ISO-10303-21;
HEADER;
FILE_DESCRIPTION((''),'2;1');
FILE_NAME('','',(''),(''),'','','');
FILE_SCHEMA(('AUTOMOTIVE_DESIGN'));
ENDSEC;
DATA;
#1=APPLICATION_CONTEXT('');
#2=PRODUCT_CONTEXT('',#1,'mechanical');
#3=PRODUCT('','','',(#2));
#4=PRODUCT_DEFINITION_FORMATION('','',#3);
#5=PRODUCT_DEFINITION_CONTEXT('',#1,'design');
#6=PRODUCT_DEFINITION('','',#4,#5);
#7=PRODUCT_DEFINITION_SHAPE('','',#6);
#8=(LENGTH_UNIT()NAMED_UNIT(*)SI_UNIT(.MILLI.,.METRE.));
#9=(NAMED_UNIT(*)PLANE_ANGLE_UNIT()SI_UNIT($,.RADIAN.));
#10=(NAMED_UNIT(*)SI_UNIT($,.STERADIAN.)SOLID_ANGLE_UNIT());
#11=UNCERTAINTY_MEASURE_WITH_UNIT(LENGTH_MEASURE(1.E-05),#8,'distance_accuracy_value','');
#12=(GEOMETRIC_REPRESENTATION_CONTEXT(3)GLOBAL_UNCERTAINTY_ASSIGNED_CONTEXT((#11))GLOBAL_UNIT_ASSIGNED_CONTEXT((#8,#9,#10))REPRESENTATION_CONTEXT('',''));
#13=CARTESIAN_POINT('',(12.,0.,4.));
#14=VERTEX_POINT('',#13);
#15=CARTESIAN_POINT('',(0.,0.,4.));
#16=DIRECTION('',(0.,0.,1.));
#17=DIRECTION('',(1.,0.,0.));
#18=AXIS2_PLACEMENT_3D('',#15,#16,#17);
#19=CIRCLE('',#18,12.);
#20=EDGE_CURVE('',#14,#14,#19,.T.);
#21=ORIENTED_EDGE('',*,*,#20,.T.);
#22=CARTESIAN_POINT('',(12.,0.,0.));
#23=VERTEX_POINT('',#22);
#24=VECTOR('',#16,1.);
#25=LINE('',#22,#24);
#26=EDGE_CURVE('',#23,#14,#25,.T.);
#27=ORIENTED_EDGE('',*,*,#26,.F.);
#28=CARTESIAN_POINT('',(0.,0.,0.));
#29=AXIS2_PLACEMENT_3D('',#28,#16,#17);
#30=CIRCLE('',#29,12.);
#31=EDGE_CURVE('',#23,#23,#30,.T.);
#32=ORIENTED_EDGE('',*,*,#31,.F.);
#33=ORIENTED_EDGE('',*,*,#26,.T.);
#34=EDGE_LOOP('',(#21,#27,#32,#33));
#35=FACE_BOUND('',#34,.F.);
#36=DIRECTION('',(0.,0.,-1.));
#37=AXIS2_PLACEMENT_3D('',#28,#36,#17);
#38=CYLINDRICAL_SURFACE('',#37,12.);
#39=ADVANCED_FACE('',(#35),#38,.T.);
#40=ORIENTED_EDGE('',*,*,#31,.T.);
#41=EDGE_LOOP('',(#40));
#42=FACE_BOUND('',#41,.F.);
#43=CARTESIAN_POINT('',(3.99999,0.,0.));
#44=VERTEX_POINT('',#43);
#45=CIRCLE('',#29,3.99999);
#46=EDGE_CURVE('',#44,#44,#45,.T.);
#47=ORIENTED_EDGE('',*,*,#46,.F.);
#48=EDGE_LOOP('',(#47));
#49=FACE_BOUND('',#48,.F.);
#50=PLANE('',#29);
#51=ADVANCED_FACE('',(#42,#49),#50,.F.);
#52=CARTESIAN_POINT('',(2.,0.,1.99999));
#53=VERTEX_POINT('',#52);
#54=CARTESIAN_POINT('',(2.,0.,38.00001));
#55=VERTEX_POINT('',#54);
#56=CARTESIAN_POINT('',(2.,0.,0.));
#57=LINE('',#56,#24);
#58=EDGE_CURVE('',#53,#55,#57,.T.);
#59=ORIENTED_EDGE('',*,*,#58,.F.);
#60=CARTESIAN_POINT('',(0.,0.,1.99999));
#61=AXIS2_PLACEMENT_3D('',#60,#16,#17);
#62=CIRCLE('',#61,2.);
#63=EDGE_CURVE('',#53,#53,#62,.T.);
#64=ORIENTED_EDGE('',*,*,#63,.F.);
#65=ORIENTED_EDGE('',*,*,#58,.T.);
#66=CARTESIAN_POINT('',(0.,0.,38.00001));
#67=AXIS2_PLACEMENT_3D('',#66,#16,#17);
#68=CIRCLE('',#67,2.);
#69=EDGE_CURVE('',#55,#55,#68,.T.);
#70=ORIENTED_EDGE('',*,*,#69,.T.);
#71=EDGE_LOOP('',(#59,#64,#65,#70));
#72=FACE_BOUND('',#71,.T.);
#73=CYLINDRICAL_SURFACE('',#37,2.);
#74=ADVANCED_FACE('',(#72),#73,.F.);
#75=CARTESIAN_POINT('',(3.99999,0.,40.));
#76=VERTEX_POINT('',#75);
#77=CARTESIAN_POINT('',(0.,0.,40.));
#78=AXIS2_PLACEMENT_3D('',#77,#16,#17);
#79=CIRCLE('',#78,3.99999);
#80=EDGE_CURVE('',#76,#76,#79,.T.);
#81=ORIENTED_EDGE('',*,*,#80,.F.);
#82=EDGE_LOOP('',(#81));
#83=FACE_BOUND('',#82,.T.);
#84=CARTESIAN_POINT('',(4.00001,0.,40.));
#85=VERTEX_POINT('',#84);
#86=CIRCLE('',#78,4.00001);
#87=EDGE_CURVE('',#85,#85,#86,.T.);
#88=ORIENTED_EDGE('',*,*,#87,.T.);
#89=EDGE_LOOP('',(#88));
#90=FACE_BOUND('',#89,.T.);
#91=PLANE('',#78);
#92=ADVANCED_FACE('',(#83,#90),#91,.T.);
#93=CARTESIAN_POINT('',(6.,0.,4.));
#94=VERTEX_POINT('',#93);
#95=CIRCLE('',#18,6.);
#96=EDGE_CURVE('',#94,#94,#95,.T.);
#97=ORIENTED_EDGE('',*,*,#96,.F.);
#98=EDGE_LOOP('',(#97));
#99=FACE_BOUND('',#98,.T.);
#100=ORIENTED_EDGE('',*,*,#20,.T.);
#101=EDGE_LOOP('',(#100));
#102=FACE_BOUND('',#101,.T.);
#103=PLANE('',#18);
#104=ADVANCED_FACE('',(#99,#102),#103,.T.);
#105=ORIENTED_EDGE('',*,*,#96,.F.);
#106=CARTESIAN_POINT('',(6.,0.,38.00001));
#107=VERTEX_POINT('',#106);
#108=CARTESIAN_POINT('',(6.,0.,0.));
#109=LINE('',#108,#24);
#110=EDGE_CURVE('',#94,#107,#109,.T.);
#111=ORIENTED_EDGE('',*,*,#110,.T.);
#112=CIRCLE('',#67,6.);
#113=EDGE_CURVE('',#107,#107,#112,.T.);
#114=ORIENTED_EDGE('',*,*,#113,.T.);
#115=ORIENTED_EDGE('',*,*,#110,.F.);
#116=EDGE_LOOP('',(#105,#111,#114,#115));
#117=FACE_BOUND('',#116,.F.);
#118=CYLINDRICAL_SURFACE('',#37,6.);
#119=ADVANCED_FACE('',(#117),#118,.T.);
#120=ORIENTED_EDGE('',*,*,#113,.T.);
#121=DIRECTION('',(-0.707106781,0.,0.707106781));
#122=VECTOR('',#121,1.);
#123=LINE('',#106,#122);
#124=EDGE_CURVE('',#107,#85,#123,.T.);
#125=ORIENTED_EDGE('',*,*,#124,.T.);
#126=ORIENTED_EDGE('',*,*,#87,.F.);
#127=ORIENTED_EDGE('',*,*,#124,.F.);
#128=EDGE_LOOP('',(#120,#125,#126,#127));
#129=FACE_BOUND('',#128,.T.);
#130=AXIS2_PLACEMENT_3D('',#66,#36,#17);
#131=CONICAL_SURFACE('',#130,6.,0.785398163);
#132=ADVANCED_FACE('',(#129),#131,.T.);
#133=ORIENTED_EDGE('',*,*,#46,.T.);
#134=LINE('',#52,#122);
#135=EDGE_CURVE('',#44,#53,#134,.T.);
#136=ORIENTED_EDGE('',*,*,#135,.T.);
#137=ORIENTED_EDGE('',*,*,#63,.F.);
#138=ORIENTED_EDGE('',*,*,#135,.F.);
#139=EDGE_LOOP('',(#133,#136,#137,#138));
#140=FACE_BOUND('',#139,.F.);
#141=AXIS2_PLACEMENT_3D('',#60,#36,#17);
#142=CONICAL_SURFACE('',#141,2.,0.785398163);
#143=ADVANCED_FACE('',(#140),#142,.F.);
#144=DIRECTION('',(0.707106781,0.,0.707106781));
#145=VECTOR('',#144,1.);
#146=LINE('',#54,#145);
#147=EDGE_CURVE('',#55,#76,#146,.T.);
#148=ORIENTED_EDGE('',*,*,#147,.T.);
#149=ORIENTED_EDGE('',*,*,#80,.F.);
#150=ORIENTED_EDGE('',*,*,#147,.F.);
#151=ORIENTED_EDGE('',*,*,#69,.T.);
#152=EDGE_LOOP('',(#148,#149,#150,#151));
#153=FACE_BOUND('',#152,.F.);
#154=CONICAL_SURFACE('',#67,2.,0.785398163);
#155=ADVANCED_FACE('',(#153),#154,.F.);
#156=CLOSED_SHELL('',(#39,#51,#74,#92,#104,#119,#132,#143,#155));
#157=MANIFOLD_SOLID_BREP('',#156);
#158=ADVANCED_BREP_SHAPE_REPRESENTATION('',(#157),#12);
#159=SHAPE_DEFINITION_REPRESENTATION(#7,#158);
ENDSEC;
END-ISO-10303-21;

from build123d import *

# Parameters (mm, degrees)
F0_R     = 6
F0_R_2   = 2
F1_DEPTH = 40
F0_R_3   = 12
F2_DEPTH = 4
F3_SIZE  = 1.99999


# Not quite as in the source:
# - a fillet or chamfer is up to 0.001 mm smaller than in the source, because OpenCascade refuses the exact size


with BuildPart() as f1:
    # F0 (on Top) → F1 (new body)
    with BuildSketch(Plane.XY):
        Circle(F0_R)
        Circle(F0_R_2, mode=Mode.SUBTRACT)
    extrude(amount=F1_DEPTH)

    # F0 (on Top) → F2 (join)
    with BuildSketch(Plane.XY):
        Circle(F0_R_3)
        Circle(F0_R, mode=Mode.SUBTRACT)
    extrude(amount=F2_DEPTH)

    # F3 (size 2 in the source; OpenCascade refuses exactly that, so slightly less here)
    f3_edges = [f1.edges().sort_by_distance(p)[0] for p in [
        (-6, 0, 40),
        (-2, 0, 40),
        (-2, 0, 0),
    ]]
    chamfer(f3_edges, length=F3_SIZE)


solid = f1.part
